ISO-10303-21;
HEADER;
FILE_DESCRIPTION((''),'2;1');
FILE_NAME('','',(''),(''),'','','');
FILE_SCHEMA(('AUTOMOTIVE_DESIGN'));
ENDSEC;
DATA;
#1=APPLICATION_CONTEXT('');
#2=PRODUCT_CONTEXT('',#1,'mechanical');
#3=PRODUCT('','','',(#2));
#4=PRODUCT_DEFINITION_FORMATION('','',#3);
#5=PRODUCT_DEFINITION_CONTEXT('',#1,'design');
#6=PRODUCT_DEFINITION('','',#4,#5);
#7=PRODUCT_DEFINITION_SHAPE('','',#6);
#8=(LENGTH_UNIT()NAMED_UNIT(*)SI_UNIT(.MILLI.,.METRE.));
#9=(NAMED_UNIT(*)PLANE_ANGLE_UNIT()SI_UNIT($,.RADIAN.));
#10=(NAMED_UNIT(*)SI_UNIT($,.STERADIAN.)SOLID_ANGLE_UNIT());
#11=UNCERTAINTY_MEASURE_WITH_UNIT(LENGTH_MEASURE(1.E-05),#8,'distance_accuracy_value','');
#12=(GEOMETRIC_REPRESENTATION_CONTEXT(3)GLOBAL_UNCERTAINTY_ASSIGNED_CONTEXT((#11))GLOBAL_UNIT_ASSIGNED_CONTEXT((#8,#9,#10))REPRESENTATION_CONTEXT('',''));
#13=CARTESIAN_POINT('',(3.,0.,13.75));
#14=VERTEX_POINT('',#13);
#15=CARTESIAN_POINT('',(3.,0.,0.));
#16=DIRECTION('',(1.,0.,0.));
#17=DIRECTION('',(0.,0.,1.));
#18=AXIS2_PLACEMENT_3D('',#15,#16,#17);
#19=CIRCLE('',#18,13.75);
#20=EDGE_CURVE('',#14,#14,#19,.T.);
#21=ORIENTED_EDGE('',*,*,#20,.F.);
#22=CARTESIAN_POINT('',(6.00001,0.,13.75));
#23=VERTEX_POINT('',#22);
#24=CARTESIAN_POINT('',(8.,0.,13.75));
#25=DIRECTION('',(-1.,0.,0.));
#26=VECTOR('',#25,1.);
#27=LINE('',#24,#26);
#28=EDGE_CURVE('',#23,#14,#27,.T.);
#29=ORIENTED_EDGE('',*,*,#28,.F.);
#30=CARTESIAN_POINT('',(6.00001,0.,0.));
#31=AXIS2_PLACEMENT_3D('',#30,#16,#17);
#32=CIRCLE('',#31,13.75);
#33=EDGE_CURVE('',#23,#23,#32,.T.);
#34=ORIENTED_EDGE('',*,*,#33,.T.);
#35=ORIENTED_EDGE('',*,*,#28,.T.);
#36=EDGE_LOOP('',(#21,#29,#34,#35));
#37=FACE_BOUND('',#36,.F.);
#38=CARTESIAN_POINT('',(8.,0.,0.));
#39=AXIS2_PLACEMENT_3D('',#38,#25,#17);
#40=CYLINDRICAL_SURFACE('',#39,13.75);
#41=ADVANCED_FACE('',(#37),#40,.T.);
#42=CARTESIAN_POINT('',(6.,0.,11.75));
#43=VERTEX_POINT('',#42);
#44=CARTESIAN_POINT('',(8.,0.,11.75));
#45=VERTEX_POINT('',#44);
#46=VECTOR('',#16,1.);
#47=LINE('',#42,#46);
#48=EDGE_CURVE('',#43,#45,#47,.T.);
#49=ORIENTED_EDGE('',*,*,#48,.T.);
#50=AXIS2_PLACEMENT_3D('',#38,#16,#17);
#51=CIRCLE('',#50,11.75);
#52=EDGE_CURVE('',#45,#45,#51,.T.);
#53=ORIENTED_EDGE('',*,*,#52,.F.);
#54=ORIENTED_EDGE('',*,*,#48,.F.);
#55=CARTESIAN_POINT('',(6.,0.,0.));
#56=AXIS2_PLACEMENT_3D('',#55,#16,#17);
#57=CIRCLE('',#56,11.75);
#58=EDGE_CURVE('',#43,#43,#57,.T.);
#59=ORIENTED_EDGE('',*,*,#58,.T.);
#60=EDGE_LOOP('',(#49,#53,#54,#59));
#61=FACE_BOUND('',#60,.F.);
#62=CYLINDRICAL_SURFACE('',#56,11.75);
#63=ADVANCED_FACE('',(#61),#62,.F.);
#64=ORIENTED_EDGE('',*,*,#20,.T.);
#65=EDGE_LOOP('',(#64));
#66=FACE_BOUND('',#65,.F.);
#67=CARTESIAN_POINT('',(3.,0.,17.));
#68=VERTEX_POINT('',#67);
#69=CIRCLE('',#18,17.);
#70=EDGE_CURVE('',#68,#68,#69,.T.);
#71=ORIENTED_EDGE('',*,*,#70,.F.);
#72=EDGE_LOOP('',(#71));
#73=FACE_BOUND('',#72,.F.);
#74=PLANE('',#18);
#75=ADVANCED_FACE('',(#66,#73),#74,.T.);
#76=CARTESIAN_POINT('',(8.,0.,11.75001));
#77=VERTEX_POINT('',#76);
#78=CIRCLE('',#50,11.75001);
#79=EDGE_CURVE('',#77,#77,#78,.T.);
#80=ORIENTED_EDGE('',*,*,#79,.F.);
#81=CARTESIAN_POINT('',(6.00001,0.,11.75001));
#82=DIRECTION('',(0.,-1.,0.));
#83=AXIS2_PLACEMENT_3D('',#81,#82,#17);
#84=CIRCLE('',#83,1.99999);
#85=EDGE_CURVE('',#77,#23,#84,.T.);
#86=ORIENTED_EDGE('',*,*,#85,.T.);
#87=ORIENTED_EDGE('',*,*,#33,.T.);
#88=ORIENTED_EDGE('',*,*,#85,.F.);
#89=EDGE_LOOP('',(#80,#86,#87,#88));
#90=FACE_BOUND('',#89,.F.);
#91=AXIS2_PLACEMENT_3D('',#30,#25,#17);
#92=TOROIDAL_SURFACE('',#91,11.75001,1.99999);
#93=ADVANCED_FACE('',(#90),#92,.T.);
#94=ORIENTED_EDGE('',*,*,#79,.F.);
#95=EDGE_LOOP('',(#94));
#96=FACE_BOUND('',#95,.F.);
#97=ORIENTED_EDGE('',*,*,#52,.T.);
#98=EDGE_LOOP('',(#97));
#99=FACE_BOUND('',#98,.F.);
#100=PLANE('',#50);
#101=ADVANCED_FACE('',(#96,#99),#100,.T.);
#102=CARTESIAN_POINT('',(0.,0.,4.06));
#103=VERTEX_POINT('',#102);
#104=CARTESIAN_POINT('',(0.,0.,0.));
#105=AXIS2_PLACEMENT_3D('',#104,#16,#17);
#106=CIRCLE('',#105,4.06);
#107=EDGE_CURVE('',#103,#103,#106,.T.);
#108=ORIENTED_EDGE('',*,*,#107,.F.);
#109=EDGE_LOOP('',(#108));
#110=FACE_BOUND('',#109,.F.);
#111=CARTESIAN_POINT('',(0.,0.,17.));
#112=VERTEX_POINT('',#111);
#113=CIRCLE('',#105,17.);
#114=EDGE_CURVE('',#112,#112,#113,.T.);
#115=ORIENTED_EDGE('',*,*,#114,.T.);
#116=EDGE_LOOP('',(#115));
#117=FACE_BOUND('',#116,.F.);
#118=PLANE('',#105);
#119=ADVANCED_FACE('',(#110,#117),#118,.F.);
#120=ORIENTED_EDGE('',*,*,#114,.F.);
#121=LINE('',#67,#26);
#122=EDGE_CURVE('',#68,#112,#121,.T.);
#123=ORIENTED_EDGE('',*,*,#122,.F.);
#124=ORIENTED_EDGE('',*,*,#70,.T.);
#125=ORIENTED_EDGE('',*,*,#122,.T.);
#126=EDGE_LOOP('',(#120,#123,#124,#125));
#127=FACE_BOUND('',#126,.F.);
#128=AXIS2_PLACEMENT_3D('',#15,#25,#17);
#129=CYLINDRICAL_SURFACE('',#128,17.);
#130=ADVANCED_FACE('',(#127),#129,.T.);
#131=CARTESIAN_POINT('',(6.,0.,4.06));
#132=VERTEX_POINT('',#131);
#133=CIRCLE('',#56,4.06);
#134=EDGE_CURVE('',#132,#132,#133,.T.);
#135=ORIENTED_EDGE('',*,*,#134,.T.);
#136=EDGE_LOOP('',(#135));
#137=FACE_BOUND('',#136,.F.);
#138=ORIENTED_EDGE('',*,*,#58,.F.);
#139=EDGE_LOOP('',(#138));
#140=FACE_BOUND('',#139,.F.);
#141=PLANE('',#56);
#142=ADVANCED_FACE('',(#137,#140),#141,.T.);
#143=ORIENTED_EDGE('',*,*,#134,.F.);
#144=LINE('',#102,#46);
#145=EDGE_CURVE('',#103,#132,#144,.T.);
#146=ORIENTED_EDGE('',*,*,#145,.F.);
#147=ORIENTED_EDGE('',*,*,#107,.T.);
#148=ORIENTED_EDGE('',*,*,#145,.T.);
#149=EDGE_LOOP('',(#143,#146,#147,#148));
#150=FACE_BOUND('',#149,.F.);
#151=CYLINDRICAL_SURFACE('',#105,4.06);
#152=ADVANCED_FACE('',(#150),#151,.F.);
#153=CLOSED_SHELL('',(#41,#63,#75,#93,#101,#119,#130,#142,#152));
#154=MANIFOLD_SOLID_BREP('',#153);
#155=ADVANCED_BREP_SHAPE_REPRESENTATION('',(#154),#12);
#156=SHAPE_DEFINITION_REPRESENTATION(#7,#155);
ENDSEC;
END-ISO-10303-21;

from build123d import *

# Parameters (mm, degrees)
F2_R = 1.99999


# Not quite as in the source:
# - a fillet or chamfer is up to 0.001 mm smaller than in the source, because OpenCascade refuses the exact size


with BuildPart() as f1:
    # F0 (on Front) → F1 (revolve)
    with BuildSketch(Plane.XZ):
        Polygon((0, 17), (0, 4.06), (6, 4.06), (6, 11.75), (8, 11.75), (8, 13.75), (3, 13.75), (3, 17), align=None)
    revolve(axis=Axis((3.2099459786, 0, 0), (1, 0, 0)))

    # F2 (radius 2 in the source; OpenCascade refuses exactly that, so slightly less here)
    f2_edges = [f1.edges().sort_by_distance(p)[0] for p in [
        (8, 0, -13.75),
    ]]
    fillet(f2_edges, radius=F2_R)


solid = f1.part
